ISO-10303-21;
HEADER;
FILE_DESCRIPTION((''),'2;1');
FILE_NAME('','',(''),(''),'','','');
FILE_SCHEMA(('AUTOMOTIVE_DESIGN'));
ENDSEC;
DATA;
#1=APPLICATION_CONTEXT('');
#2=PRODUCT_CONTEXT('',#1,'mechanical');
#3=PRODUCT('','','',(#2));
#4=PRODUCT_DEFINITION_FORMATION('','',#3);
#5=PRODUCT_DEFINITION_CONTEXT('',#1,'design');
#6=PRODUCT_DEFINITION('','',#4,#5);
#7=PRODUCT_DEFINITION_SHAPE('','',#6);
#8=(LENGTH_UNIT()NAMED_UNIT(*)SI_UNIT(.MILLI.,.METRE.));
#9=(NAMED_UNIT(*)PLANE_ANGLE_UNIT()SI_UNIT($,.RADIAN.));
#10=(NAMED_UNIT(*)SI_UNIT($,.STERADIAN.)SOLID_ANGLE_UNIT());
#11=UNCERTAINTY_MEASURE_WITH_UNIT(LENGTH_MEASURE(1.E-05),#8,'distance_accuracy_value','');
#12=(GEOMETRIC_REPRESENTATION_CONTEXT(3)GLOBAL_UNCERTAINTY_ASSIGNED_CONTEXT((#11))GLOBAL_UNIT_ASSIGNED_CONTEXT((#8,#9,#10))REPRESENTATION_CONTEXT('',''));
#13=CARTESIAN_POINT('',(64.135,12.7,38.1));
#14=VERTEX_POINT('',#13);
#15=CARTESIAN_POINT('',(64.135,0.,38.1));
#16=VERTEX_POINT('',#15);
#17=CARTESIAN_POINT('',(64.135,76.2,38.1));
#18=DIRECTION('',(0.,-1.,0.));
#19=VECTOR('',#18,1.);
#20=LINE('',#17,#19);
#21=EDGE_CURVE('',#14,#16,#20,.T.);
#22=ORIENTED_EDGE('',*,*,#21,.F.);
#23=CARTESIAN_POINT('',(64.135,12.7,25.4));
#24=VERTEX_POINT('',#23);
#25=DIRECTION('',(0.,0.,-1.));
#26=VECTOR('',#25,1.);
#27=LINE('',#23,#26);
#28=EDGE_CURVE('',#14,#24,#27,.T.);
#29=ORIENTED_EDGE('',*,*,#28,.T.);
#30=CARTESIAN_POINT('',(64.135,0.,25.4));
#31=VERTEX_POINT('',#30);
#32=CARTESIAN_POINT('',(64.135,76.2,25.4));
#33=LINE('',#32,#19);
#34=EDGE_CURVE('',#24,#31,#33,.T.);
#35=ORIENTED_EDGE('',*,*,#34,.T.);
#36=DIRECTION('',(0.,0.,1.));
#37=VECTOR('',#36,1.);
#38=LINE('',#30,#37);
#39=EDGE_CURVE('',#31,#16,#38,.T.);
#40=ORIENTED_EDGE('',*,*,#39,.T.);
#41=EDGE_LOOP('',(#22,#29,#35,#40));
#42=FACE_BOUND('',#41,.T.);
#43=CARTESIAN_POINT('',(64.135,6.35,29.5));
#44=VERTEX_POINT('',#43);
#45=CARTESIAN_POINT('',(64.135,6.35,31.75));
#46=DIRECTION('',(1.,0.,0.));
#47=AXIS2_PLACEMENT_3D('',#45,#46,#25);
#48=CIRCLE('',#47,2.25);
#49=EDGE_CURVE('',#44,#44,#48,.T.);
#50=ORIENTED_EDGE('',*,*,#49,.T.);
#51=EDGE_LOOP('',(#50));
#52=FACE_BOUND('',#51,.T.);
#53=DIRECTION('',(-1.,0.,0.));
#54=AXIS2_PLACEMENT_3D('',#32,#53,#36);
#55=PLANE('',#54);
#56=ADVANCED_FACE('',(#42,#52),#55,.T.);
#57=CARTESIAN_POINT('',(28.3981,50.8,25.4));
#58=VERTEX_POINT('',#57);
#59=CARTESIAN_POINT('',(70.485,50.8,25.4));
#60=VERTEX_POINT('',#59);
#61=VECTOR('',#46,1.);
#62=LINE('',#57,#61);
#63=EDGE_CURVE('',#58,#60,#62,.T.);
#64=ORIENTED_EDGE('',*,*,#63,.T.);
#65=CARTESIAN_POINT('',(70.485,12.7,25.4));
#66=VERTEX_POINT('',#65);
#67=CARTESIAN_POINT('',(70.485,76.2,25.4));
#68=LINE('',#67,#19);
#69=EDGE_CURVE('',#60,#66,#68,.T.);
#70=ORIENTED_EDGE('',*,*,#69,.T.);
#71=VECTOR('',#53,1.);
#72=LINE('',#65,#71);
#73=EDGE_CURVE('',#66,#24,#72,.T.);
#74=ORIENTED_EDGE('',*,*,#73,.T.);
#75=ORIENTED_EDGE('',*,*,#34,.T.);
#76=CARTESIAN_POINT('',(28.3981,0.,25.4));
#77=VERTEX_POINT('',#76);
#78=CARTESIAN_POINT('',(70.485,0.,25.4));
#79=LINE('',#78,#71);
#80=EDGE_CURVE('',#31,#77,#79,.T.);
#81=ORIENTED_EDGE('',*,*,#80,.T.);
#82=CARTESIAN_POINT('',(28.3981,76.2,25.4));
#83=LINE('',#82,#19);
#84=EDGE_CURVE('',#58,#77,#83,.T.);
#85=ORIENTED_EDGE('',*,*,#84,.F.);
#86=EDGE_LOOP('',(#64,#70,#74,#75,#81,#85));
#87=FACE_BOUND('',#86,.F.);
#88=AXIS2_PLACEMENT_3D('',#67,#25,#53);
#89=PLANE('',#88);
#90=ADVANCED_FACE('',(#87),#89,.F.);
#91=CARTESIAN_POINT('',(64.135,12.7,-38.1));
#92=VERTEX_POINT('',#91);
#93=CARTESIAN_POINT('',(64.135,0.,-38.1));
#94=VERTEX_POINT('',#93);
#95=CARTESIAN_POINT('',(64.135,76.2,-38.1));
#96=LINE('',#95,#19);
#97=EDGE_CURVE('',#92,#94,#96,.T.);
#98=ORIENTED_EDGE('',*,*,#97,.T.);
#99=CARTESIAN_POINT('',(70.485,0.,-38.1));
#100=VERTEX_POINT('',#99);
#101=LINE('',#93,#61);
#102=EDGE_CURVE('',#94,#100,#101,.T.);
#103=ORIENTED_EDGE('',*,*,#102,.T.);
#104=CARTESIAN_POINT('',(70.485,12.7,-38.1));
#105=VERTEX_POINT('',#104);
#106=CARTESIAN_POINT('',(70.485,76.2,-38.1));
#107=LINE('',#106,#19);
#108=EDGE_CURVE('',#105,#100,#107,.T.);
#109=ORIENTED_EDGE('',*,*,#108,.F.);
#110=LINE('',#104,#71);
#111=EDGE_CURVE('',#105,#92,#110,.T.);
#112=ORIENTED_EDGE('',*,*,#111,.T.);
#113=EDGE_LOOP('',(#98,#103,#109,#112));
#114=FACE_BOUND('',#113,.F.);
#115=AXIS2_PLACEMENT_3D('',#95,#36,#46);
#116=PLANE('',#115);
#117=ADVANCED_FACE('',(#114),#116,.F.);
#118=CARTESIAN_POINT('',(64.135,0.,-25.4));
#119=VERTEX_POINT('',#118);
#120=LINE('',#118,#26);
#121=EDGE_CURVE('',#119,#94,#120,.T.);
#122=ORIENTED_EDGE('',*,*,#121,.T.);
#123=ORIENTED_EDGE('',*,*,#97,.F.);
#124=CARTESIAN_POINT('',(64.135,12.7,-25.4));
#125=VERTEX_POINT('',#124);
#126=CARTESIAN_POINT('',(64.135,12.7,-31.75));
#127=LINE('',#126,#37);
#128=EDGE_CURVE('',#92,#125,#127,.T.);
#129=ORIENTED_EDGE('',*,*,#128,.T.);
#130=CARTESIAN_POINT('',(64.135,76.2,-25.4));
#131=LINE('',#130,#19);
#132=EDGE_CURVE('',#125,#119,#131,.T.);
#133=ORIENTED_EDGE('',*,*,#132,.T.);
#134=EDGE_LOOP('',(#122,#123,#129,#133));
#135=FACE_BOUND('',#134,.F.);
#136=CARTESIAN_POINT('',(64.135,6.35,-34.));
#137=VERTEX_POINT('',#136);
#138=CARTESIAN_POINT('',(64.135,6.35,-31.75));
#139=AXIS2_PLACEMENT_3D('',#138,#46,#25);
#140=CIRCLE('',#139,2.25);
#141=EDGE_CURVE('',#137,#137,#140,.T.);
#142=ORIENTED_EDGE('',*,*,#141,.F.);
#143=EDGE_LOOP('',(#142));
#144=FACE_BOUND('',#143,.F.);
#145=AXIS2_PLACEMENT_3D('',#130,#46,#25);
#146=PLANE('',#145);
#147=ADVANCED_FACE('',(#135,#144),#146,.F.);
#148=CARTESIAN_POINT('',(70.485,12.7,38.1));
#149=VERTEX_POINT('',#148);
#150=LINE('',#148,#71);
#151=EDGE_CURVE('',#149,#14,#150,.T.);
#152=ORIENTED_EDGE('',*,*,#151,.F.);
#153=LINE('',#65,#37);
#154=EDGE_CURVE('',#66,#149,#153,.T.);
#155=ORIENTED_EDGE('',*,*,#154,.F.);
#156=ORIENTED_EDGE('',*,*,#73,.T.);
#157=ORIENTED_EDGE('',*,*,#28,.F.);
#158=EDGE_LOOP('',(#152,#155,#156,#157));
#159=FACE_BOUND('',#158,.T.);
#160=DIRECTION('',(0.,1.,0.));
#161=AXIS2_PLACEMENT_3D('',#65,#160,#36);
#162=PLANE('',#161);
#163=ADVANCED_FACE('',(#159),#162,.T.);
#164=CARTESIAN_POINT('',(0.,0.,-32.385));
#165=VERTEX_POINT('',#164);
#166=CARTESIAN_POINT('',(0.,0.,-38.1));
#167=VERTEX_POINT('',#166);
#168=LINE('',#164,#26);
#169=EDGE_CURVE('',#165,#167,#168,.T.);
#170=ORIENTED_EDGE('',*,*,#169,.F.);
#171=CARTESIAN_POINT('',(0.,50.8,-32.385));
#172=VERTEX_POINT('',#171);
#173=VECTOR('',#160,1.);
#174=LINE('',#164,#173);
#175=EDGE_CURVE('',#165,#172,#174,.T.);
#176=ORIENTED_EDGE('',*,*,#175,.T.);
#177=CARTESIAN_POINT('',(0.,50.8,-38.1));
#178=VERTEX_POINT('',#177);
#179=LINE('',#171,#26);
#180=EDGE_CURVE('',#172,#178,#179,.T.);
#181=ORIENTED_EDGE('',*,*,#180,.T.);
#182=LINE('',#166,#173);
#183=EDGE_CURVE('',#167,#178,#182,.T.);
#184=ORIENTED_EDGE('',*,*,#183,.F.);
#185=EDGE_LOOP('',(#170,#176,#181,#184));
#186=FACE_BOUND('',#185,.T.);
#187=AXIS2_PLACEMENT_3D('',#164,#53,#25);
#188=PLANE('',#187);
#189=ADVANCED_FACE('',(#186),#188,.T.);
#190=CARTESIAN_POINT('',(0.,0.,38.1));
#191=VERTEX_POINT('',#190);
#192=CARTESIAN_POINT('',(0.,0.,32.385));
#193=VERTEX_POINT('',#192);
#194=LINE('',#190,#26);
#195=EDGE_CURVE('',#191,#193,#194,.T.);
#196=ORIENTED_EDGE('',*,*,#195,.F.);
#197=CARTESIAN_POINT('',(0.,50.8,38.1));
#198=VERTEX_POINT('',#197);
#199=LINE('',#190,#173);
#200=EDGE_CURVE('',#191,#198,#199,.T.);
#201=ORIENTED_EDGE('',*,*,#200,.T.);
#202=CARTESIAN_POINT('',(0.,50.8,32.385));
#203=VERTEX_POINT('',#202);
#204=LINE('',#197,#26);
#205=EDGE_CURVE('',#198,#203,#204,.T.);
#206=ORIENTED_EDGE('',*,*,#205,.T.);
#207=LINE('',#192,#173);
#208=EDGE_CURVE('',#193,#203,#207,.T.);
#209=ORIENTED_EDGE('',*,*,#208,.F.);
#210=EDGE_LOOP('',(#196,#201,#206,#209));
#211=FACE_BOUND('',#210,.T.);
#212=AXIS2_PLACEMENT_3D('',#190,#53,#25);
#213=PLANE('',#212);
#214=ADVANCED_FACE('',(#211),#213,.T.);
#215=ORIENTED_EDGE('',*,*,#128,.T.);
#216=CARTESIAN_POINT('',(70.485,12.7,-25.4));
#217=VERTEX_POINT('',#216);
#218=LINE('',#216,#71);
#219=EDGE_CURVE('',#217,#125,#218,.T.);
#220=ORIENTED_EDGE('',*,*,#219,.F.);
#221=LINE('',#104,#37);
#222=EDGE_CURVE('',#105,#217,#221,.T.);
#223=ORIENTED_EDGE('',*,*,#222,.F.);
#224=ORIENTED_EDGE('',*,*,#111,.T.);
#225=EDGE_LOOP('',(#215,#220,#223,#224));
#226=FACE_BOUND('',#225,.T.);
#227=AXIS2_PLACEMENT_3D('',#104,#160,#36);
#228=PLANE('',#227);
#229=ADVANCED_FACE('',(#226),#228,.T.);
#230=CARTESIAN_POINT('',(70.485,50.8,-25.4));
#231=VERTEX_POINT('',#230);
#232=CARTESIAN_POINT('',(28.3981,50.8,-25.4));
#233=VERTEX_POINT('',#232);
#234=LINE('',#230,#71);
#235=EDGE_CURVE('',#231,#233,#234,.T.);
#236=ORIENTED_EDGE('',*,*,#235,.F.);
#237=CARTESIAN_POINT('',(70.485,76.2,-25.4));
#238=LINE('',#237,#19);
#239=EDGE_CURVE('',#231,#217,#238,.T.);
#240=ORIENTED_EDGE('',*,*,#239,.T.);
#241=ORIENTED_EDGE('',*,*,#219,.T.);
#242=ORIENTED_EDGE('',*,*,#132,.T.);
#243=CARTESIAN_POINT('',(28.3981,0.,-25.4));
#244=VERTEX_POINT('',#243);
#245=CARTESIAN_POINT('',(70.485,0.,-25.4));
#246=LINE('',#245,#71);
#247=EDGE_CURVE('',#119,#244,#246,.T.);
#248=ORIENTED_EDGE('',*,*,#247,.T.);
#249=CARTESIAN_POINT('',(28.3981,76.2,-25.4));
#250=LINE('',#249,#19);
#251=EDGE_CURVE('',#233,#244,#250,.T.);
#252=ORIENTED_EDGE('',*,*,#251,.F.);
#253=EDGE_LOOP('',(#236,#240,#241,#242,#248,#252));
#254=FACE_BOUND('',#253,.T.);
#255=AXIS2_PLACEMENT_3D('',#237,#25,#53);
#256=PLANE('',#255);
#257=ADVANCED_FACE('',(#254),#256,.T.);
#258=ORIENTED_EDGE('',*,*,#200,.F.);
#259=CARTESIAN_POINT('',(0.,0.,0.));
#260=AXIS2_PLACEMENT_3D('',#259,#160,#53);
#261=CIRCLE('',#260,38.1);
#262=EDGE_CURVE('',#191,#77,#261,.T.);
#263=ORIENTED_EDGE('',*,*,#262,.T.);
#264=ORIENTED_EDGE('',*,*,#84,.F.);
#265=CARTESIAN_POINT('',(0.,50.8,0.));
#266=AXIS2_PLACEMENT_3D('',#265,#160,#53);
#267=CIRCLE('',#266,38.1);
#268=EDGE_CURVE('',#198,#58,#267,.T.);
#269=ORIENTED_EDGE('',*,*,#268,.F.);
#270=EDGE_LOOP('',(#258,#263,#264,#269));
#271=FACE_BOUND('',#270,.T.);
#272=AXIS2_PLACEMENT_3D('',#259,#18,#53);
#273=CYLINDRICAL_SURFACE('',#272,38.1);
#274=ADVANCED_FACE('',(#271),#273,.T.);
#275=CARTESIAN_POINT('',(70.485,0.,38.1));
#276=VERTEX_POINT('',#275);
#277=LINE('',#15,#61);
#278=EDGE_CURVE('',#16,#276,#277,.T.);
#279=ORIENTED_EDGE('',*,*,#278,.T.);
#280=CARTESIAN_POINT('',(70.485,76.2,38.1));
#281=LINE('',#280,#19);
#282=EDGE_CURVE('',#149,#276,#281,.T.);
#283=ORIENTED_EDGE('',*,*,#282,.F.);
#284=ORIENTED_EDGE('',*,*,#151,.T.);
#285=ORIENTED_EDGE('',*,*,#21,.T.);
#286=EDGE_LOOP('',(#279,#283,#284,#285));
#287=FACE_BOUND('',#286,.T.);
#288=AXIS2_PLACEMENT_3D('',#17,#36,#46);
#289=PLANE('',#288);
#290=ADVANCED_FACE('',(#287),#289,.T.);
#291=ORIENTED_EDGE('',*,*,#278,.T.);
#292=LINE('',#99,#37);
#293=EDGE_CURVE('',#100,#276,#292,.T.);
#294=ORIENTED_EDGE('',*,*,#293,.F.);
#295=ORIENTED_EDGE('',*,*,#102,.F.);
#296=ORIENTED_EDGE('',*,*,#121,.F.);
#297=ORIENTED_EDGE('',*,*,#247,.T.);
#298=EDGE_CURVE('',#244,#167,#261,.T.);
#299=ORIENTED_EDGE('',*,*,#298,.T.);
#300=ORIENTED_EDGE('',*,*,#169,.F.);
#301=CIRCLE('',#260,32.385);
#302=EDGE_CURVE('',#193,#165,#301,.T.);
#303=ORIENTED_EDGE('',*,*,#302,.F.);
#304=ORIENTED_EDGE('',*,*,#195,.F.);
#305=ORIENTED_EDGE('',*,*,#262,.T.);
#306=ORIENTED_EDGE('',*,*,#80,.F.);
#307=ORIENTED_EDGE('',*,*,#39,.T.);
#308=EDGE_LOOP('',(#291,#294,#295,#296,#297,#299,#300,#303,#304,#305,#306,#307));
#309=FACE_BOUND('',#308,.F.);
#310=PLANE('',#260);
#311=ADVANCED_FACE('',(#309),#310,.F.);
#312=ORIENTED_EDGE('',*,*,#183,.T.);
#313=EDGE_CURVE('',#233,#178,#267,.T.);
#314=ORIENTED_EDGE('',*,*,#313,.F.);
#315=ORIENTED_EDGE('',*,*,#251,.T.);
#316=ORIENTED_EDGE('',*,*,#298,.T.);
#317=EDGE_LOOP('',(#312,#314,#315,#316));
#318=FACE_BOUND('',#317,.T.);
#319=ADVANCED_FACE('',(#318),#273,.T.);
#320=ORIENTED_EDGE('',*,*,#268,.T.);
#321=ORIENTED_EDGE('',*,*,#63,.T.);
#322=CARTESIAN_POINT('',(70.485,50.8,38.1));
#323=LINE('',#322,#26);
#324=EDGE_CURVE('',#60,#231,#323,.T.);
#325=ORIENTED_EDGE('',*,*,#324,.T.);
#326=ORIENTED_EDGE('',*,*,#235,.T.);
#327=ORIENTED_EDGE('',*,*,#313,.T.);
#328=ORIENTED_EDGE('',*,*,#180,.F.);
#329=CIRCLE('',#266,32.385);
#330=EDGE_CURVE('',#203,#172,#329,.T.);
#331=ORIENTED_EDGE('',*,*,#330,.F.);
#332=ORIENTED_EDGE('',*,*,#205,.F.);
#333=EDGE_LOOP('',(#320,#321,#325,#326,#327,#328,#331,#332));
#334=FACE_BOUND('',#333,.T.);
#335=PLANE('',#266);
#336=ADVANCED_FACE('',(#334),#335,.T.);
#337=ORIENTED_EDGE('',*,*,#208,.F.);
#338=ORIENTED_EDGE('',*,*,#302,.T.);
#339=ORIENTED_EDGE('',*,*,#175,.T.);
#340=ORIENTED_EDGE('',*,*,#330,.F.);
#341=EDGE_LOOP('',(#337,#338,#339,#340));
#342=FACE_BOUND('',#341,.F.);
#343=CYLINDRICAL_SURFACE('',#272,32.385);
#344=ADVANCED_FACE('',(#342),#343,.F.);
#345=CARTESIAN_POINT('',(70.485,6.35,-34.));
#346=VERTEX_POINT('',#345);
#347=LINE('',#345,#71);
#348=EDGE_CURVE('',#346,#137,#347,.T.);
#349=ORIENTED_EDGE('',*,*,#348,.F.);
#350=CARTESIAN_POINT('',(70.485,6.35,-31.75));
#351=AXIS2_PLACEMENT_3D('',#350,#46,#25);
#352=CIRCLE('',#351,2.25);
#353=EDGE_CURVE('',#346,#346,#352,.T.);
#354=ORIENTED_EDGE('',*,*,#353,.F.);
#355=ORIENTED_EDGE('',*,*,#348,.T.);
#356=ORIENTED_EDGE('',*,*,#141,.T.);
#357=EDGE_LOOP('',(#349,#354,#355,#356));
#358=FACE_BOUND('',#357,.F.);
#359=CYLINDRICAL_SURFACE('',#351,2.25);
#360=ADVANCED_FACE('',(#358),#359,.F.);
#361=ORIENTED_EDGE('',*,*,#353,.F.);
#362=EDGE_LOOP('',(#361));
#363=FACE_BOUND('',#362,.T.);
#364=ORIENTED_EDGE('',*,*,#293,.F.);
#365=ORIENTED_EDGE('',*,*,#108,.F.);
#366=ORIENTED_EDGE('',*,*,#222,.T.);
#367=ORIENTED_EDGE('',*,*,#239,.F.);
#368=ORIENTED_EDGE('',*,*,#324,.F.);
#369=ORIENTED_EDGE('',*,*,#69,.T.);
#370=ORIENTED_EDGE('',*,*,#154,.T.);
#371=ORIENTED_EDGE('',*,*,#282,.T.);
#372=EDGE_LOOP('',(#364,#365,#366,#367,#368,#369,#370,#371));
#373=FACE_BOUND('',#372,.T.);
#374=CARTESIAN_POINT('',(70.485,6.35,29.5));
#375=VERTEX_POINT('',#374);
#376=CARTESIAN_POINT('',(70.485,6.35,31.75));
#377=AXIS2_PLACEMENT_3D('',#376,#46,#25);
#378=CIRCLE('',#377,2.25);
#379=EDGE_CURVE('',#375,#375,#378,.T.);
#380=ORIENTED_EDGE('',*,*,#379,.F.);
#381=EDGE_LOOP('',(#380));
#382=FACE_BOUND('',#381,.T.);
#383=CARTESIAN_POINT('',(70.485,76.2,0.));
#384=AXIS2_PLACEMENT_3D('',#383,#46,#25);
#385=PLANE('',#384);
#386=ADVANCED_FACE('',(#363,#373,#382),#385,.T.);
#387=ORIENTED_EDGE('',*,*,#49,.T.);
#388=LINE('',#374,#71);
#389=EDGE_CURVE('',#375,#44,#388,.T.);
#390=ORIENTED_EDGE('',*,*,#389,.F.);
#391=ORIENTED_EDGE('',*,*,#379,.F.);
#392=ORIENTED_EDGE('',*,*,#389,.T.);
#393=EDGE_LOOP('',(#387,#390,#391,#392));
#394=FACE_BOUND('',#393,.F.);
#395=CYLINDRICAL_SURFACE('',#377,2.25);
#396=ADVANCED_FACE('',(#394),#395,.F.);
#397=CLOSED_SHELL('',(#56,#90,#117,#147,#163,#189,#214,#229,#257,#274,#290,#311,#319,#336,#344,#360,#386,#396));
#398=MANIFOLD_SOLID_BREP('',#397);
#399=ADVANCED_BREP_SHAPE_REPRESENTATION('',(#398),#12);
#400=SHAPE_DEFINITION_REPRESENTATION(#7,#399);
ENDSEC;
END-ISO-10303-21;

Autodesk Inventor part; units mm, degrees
ref_plane "YZ Plane" through (0, 0, 0) normal (1, 0, 0) x (0, 1, 0)
ref_plane "XZ Plane" through (0, 0, 0) normal (0, 1, 0) x (-1, 0, 0)
ref_plane "XY Plane" through (0, 0, 0) normal (0, 0, 1) x (1, 0, 0)
sketch "Sketch1" plane through (0, 0, 0) normal (0, 1, 0) x (-1, 0, 0)
  circle A0 centre (0, 0) radius 32.385
  circle A1 centre (0, 0) radius 38.1
  line L0 (0, 38.1) -> (0, 32.385)
  line L1 (0, -32.385) -> (0, -38.1)
  dimension "d0" = 64.77
  dimension "d1" = 76.2
extrude "Extrusion1" add sketch "Sketch1" along normal blind 76.2 contours A0 L1 A1 L0 picked at (-2.826, -35.8766)
sketch "Sketch2" plane through (0, 76.2, 0) normal (0, 1, 0) x (1, 0, 0)
  arc A0 (0, -32.385) -> (0, 32.385) centre (0, 0) ccw projected
  line L0 (32.385, 0) -> (70.485, 0)
  line L1 (70.485, 0) -> (70.485, -25.4)
  line L2 (70.485, -25.4) -> (28.3981, -25.4)
  arc A1 (0, -38.1) -> (0, 38.1) centre (0, 0) ccw projected
  line L3 (70.485, 0) -> (70.485, 25.4)
  line L4 (70.485, 25.4) -> (28.3981, 25.4)
  arc A2 (28.3981, -25.4) -> (28.3981, 25.4) centre (0, 0) ccw
  dimension "d4" = 38.1
  dimension "d5" = 25.4
  dimension "d6" = 25.4
extrude "Extrusion2" add sketch "Sketch2" against normal blind 76.2
sketch "Sketch3" plane through (0, 76.2, 0) normal (0, 1, 0) x (1, 0, 0)
  line L0 (70.485, -25.4) -> (28.3981, -25.4) projected
  line L1 (70.485, -25.4) -> (64.135, -25.4)
  line L2 (64.135, -25.4) -> (64.135, -38.1)
  line L3 (64.135, -38.1) -> (70.485, -38.1)
  line L4 (70.485, -38.1) -> (70.485, -25.4)
  line L5 (28.3981, 25.4) -> (70.485, 25.4) projected
  line L6 (70.485, 25.4) -> (64.135, 25.4)
  line L7 (64.135, 25.4) -> (64.135, 38.1)
  line L8 (64.135, 38.1) -> (70.485, 38.1)
  line L9 (70.485, 38.1) -> (70.485, 25.4)
  point P0 (0, 0)
  dimension "d9" = 6.35
  dimension "d10" = 12.7
  dimension "d11" = 6.35
  dimension "d12" = 12.7
extrude "Extrusion3" add sketch "Sketch3" against normal blind 76.2
sketch "Sketch4" plane through (70.485, 76.2, 38.1) normal (1, 0, 0) x (0, 0, -1)
  line L0 (0, -76.2) -> (0, 0) projected
  line L1 (0, 0) -> (12.7, 0)
  line L2 (12.7, 0) -> (12.7, -76.2)
  line L3 (12.7, -76.2) -> (0, -76.2)
  line L4 (0, -76.2) -> (0, 0)
  line L5 (63.5, 0) -> (63.5, -76.2) projected
  line L6 (76.2, 0) -> (76.2, -76.2) projected
  line L7 (63.5, -76.2) -> (76.2, -76.2)
  line L8 (76.2, -76.2) -> (76.2, 0)
  line L9 (76.2, 0) -> (63.5, 0)
  line L10 (63.5, 0) -> (63.5, -76.2)
  line L11 (0, -76.2) -> (12.7, -76.2)
  line L12 (12.7, -76.2) -> (12.7, -63.5)
  line L13 (12.7, -63.5) -> (0, -63.5)
  line L14 (0, -63.5) -> (0, -76.2)
  line L15 (0, 0) -> (76.2, 0) projected
  line L16 (0, 0) -> (12.7, 0)
  line L17 (12.7, 0) -> (12.7, -12.7)
  line L18 (12.7, -12.7) -> (0, -12.7)
  line L19 (0, -12.7) -> (0, 0)
  line L20 (63.5, -76.2) -> (76.2, -76.2)
  line L21 (76.2, -76.2) -> (76.2, -63.5)
  line L22 (76.2, -63.5) -> (63.5, -63.5)
  line L23 (63.5, -63.5) -> (63.5, -76.2)
  line L24 (63.5, 0) -> (76.2, 0)
  line L25 (76.2, 0) -> (76.2, -12.7)
  line L26 (76.2, -12.7) -> (63.5, -12.7)
  line L27 (63.5, -12.7) -> (63.5, 0)
  point P0 (38.1, -76.2)
  dimension "d15" = 12.7
  dimension "d16" = 12.7
  dimension "d17" = 12.7
  dimension "d18" = 12.7
  dimension "d19" = 12.7
  dimension "d20" = 12.7
  dimension "d21" = 12.7
  dimension "d22" = 12.7
extrude "Extrusion4" cut sketch "Sketch4" against normal blind 36.5125 contours L0 L18 L2 L13 | L26 L6 L22 L5
sketch "Sketch5" plane through (70.485, 76.2, 38.1) normal (1, 0, 0) x (0, 0, -1)
  line L0 (12.7, -12.7) -> (0, -12.7) projected
  line L1 (0, -76.2) -> (0, 0) projected
  line L2 (12.7, -12.7) -> (0, -12.7)
  line L3 (0, -12.7) -> (0, 0)
  line L4 (0, 0) -> (12.7, 0)
  line L5 (12.7, 0) -> (12.7, -12.7)
  line L6 (76.2, -12.7) -> (63.5, -12.7) projected
  line L7 (63.5, 0) -> (76.2, 0) projected
  line L8 (63.5, -12.7) -> (76.2, -12.7)
  line L9 (76.2, -12.7) -> (76.2, 0)
  line L10 (76.2, 0) -> (63.5, 0)
  line L11 (63.5, 0) -> (63.5, -12.7)
  line L12 (12.7, -63.5) -> (0, -63.5) projected
  line L13 (0, -76.2) -> (12.7, -76.2) projected
  line L14 (12.7, -63.5) -> (0, -63.5)
  line L15 (0, -63.5) -> (0, -76.2)
  line L16 (0, -76.2) -> (12.7, -76.2)
  line L17 (12.7, -76.2) -> (12.7, -63.5)
  line L18 (63.5, -63.5) -> (63.5, -12.7) projected
  line L19 (63.5, -76.2) -> (76.2, -76.2) projected
  line L20 (63.5, -63.5) -> (76.2, -63.5)
  line L21 (76.2, -63.5) -> (76.2, -76.2)
  line L22 (76.2, -76.2) -> (63.5, -76.2)
  line L23 (63.5, -76.2) -> (63.5, -63.5)
  circle A0 centre (6.35, -6.35) radius 2.25
  circle A1 centre (69.85, -6.35) radius 2.25
  circle A2 centre (6.35, -69.85) radius 2.25
  circle A3 centre (69.85, -69.85) radius 2.25
  point P0 (38.1, -76.2)
  dimension "d25" = 4.5
  dimension "d26" = 4.5
  dimension "d27" = 4.5
  dimension "d28" = 4.5
extrude "Extrusion5" cut sketch "Sketch5" against normal blind 36.5125 contours A0 | A1 | A2 | A3
thicken "Thicken1" operation add thickness 25.4 both sides no extend neighbours yes toward (0, -1, 0) faces at (53.473, 76.2, 1.3012)
properties part number "motor support"
